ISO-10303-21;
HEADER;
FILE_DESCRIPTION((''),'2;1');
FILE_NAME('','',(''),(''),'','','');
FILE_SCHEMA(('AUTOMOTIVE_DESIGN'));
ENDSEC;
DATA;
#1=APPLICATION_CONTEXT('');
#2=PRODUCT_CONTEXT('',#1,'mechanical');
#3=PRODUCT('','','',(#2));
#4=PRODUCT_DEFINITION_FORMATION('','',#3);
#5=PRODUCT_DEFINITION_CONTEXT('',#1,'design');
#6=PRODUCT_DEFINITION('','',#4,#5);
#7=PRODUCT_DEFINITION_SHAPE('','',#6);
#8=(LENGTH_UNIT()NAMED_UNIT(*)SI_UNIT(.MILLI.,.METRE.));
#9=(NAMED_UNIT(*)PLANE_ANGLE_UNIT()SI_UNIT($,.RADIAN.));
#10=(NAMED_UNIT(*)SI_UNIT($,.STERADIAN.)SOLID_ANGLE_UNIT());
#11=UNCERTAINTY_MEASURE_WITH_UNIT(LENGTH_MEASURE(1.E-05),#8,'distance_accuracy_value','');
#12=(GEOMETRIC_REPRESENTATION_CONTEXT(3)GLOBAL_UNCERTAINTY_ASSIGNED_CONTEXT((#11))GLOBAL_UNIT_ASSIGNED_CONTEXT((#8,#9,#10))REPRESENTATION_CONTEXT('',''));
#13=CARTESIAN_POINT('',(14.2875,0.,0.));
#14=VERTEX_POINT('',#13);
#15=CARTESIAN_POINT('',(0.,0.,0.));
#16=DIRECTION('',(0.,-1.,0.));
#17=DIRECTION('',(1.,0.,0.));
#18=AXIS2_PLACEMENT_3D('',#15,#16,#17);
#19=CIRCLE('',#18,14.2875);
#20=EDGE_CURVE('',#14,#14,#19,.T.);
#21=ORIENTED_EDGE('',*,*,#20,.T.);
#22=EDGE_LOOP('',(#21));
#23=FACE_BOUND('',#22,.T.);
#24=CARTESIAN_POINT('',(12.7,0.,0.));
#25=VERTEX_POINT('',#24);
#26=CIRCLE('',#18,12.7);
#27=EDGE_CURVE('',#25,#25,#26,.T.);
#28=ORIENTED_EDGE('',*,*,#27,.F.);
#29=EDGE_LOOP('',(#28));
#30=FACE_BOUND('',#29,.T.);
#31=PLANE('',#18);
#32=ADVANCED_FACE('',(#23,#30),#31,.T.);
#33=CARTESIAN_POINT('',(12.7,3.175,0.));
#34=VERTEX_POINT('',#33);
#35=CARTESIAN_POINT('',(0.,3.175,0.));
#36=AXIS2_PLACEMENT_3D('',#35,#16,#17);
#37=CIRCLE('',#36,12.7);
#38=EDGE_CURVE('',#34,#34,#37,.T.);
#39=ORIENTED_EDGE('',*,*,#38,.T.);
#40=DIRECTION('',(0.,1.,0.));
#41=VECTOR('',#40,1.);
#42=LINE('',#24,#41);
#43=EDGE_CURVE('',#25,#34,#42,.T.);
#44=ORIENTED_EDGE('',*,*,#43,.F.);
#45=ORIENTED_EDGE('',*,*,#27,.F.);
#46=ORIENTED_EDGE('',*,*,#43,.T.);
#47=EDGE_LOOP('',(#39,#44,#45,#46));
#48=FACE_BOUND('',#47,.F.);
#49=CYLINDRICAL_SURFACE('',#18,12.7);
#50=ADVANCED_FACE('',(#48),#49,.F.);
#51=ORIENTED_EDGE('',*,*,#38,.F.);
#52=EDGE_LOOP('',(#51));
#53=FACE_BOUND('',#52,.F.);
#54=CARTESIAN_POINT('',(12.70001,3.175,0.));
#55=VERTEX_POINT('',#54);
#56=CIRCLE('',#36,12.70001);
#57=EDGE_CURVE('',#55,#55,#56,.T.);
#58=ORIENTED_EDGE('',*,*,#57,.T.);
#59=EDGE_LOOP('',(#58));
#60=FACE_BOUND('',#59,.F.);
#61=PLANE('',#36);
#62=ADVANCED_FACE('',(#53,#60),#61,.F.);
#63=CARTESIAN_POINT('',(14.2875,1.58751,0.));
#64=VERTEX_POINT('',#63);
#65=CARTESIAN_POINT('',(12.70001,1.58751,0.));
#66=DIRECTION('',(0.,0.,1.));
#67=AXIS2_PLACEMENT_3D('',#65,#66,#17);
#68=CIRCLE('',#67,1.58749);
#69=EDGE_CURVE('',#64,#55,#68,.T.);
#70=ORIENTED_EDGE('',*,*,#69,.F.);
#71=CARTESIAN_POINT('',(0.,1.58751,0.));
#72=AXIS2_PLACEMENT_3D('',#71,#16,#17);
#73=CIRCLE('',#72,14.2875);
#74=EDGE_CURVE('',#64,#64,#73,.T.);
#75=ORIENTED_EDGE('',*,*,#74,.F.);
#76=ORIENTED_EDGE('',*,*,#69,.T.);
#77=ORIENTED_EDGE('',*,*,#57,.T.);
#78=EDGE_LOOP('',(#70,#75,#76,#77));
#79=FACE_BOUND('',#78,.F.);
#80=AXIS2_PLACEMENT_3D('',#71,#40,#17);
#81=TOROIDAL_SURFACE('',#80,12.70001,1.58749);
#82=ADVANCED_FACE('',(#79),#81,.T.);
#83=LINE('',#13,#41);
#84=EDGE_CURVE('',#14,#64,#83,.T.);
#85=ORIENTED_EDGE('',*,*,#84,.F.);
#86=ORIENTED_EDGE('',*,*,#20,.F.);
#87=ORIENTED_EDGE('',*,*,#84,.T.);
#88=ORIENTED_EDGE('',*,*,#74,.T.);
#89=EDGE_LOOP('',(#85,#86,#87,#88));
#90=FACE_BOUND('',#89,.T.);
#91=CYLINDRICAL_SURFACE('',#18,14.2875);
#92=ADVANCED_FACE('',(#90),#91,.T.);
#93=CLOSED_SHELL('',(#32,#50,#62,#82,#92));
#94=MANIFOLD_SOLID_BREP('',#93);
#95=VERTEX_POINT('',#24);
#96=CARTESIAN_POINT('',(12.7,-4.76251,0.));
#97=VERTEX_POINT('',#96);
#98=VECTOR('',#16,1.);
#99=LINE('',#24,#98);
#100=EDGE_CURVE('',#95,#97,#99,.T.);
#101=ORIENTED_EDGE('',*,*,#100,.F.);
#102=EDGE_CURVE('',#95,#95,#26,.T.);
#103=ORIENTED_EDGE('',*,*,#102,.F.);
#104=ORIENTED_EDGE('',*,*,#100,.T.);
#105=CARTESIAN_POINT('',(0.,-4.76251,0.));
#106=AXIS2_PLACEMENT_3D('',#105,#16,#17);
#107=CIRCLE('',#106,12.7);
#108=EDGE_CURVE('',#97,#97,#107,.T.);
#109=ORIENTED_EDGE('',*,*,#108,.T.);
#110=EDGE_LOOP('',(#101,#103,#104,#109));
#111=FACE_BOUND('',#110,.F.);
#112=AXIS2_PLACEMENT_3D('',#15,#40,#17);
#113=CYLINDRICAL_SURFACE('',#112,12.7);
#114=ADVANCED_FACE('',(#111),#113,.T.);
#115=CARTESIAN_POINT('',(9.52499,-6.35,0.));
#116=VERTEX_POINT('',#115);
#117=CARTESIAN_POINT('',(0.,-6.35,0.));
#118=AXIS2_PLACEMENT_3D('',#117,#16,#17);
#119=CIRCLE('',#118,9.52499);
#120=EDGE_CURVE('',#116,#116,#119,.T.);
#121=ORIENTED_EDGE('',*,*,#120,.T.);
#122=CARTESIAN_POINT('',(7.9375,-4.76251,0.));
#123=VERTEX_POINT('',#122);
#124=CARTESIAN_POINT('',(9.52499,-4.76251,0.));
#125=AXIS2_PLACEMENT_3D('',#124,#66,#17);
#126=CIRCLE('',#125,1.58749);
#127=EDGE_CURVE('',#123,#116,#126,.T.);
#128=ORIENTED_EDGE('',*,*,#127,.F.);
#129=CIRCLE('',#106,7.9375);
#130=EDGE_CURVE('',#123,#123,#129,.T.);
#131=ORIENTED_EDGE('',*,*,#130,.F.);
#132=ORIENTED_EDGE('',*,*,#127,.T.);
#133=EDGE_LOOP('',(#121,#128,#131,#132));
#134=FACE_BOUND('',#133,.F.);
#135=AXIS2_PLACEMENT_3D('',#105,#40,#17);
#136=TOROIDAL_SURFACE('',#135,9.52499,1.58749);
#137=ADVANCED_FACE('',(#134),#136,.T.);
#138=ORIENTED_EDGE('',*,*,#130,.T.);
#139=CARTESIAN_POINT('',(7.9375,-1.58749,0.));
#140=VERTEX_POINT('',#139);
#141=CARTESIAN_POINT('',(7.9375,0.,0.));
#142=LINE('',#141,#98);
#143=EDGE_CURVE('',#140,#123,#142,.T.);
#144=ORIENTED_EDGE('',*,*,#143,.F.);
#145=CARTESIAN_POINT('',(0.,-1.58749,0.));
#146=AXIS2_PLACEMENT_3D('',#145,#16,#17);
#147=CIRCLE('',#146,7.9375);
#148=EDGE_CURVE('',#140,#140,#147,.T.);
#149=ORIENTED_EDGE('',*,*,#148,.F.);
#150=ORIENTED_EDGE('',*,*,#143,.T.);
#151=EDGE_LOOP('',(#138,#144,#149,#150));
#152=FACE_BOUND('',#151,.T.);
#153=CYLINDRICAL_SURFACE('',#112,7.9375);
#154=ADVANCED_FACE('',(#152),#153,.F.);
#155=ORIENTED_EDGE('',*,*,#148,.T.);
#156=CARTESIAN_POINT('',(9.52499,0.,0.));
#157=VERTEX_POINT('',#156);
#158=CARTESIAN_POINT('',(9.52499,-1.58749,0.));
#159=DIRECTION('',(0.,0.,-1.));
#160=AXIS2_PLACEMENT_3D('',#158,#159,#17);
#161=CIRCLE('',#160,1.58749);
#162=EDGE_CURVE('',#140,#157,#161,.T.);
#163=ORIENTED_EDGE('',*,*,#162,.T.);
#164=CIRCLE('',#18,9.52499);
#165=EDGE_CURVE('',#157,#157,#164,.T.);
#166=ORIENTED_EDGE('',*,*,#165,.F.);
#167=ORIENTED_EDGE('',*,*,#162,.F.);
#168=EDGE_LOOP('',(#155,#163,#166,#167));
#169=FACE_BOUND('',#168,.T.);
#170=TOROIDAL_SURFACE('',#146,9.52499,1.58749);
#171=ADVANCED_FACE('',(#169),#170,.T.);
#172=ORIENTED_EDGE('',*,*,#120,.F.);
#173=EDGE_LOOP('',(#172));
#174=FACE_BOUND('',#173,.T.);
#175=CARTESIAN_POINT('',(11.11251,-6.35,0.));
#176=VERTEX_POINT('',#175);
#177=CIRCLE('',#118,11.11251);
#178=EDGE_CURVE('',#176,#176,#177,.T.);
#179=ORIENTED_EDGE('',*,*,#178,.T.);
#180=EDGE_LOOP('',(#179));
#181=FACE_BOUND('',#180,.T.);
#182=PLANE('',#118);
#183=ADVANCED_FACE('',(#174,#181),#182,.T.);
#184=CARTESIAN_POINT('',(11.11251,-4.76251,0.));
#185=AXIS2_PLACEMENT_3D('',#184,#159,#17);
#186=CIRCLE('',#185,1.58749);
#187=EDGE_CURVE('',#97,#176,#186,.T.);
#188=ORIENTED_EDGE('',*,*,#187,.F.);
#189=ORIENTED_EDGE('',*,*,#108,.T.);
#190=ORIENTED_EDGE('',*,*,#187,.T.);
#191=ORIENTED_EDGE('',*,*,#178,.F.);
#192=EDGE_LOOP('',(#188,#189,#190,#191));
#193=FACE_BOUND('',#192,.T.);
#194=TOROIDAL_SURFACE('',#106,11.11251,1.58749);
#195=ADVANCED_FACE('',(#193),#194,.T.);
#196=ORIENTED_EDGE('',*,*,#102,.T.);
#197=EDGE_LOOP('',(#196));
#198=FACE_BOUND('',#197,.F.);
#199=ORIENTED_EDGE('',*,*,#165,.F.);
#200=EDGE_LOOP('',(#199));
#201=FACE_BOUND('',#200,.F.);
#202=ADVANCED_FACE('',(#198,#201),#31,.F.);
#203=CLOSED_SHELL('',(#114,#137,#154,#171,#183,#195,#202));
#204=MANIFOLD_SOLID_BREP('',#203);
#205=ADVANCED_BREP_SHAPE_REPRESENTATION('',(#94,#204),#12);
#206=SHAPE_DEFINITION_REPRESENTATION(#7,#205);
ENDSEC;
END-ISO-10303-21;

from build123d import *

# Parameters (mm, degrees)
F0_R     = 12.7
F0_R_2   = 7.9375
F1_DEPTH = 6.35
F0_R_3   = 14.2875
F2_DEPTH = 3.175
F3_R     = 1.58749
F3_2_R   = 1.58749


# Not quite as in the source:
# - a fillet or chamfer is up to 0.001 mm smaller than in the source, because OpenCascade refuses the exact size


with BuildPart() as f1:
    # F0 (on Front) → F1 (new body)
    with BuildSketch(Plane.XZ):
        Circle(F0_R)
        Circle(F0_R_2, mode=Mode.SUBTRACT)
    extrude(amount=F1_DEPTH)

    # F3 (radius 1.5875 in the source; OpenCascade refuses exactly that, so slightly less here)
    f3_edges = [f1.edges().sort_by_distance(p)[0] for p in [
        (-12.7, -6.35, 0),
        (-7.9375, -6.35, 0),
        (-7.9375, 0, 0),
    ]]
    fillet(f3_edges, radius=F3_R)


with BuildPart() as f2:
    # F0 (on Front) → F2 (new body)
    with BuildSketch(Plane.XZ):
        Circle(F0_R_3)
        Circle(F0_R, mode=Mode.SUBTRACT)
    extrude(amount=-F2_DEPTH)

    # F3#2 (radius 1.5875 in the source; OpenCascade refuses exactly that, so slightly less here)
    f3_2_edges = [f2.edges().sort_by_distance(p)[0] for p in [
        (-14.2875, 3.175, 0),
    ]]
    fillet(f3_2_edges, radius=F3_2_R)


solid = Compound([f1.part, f2.part])
